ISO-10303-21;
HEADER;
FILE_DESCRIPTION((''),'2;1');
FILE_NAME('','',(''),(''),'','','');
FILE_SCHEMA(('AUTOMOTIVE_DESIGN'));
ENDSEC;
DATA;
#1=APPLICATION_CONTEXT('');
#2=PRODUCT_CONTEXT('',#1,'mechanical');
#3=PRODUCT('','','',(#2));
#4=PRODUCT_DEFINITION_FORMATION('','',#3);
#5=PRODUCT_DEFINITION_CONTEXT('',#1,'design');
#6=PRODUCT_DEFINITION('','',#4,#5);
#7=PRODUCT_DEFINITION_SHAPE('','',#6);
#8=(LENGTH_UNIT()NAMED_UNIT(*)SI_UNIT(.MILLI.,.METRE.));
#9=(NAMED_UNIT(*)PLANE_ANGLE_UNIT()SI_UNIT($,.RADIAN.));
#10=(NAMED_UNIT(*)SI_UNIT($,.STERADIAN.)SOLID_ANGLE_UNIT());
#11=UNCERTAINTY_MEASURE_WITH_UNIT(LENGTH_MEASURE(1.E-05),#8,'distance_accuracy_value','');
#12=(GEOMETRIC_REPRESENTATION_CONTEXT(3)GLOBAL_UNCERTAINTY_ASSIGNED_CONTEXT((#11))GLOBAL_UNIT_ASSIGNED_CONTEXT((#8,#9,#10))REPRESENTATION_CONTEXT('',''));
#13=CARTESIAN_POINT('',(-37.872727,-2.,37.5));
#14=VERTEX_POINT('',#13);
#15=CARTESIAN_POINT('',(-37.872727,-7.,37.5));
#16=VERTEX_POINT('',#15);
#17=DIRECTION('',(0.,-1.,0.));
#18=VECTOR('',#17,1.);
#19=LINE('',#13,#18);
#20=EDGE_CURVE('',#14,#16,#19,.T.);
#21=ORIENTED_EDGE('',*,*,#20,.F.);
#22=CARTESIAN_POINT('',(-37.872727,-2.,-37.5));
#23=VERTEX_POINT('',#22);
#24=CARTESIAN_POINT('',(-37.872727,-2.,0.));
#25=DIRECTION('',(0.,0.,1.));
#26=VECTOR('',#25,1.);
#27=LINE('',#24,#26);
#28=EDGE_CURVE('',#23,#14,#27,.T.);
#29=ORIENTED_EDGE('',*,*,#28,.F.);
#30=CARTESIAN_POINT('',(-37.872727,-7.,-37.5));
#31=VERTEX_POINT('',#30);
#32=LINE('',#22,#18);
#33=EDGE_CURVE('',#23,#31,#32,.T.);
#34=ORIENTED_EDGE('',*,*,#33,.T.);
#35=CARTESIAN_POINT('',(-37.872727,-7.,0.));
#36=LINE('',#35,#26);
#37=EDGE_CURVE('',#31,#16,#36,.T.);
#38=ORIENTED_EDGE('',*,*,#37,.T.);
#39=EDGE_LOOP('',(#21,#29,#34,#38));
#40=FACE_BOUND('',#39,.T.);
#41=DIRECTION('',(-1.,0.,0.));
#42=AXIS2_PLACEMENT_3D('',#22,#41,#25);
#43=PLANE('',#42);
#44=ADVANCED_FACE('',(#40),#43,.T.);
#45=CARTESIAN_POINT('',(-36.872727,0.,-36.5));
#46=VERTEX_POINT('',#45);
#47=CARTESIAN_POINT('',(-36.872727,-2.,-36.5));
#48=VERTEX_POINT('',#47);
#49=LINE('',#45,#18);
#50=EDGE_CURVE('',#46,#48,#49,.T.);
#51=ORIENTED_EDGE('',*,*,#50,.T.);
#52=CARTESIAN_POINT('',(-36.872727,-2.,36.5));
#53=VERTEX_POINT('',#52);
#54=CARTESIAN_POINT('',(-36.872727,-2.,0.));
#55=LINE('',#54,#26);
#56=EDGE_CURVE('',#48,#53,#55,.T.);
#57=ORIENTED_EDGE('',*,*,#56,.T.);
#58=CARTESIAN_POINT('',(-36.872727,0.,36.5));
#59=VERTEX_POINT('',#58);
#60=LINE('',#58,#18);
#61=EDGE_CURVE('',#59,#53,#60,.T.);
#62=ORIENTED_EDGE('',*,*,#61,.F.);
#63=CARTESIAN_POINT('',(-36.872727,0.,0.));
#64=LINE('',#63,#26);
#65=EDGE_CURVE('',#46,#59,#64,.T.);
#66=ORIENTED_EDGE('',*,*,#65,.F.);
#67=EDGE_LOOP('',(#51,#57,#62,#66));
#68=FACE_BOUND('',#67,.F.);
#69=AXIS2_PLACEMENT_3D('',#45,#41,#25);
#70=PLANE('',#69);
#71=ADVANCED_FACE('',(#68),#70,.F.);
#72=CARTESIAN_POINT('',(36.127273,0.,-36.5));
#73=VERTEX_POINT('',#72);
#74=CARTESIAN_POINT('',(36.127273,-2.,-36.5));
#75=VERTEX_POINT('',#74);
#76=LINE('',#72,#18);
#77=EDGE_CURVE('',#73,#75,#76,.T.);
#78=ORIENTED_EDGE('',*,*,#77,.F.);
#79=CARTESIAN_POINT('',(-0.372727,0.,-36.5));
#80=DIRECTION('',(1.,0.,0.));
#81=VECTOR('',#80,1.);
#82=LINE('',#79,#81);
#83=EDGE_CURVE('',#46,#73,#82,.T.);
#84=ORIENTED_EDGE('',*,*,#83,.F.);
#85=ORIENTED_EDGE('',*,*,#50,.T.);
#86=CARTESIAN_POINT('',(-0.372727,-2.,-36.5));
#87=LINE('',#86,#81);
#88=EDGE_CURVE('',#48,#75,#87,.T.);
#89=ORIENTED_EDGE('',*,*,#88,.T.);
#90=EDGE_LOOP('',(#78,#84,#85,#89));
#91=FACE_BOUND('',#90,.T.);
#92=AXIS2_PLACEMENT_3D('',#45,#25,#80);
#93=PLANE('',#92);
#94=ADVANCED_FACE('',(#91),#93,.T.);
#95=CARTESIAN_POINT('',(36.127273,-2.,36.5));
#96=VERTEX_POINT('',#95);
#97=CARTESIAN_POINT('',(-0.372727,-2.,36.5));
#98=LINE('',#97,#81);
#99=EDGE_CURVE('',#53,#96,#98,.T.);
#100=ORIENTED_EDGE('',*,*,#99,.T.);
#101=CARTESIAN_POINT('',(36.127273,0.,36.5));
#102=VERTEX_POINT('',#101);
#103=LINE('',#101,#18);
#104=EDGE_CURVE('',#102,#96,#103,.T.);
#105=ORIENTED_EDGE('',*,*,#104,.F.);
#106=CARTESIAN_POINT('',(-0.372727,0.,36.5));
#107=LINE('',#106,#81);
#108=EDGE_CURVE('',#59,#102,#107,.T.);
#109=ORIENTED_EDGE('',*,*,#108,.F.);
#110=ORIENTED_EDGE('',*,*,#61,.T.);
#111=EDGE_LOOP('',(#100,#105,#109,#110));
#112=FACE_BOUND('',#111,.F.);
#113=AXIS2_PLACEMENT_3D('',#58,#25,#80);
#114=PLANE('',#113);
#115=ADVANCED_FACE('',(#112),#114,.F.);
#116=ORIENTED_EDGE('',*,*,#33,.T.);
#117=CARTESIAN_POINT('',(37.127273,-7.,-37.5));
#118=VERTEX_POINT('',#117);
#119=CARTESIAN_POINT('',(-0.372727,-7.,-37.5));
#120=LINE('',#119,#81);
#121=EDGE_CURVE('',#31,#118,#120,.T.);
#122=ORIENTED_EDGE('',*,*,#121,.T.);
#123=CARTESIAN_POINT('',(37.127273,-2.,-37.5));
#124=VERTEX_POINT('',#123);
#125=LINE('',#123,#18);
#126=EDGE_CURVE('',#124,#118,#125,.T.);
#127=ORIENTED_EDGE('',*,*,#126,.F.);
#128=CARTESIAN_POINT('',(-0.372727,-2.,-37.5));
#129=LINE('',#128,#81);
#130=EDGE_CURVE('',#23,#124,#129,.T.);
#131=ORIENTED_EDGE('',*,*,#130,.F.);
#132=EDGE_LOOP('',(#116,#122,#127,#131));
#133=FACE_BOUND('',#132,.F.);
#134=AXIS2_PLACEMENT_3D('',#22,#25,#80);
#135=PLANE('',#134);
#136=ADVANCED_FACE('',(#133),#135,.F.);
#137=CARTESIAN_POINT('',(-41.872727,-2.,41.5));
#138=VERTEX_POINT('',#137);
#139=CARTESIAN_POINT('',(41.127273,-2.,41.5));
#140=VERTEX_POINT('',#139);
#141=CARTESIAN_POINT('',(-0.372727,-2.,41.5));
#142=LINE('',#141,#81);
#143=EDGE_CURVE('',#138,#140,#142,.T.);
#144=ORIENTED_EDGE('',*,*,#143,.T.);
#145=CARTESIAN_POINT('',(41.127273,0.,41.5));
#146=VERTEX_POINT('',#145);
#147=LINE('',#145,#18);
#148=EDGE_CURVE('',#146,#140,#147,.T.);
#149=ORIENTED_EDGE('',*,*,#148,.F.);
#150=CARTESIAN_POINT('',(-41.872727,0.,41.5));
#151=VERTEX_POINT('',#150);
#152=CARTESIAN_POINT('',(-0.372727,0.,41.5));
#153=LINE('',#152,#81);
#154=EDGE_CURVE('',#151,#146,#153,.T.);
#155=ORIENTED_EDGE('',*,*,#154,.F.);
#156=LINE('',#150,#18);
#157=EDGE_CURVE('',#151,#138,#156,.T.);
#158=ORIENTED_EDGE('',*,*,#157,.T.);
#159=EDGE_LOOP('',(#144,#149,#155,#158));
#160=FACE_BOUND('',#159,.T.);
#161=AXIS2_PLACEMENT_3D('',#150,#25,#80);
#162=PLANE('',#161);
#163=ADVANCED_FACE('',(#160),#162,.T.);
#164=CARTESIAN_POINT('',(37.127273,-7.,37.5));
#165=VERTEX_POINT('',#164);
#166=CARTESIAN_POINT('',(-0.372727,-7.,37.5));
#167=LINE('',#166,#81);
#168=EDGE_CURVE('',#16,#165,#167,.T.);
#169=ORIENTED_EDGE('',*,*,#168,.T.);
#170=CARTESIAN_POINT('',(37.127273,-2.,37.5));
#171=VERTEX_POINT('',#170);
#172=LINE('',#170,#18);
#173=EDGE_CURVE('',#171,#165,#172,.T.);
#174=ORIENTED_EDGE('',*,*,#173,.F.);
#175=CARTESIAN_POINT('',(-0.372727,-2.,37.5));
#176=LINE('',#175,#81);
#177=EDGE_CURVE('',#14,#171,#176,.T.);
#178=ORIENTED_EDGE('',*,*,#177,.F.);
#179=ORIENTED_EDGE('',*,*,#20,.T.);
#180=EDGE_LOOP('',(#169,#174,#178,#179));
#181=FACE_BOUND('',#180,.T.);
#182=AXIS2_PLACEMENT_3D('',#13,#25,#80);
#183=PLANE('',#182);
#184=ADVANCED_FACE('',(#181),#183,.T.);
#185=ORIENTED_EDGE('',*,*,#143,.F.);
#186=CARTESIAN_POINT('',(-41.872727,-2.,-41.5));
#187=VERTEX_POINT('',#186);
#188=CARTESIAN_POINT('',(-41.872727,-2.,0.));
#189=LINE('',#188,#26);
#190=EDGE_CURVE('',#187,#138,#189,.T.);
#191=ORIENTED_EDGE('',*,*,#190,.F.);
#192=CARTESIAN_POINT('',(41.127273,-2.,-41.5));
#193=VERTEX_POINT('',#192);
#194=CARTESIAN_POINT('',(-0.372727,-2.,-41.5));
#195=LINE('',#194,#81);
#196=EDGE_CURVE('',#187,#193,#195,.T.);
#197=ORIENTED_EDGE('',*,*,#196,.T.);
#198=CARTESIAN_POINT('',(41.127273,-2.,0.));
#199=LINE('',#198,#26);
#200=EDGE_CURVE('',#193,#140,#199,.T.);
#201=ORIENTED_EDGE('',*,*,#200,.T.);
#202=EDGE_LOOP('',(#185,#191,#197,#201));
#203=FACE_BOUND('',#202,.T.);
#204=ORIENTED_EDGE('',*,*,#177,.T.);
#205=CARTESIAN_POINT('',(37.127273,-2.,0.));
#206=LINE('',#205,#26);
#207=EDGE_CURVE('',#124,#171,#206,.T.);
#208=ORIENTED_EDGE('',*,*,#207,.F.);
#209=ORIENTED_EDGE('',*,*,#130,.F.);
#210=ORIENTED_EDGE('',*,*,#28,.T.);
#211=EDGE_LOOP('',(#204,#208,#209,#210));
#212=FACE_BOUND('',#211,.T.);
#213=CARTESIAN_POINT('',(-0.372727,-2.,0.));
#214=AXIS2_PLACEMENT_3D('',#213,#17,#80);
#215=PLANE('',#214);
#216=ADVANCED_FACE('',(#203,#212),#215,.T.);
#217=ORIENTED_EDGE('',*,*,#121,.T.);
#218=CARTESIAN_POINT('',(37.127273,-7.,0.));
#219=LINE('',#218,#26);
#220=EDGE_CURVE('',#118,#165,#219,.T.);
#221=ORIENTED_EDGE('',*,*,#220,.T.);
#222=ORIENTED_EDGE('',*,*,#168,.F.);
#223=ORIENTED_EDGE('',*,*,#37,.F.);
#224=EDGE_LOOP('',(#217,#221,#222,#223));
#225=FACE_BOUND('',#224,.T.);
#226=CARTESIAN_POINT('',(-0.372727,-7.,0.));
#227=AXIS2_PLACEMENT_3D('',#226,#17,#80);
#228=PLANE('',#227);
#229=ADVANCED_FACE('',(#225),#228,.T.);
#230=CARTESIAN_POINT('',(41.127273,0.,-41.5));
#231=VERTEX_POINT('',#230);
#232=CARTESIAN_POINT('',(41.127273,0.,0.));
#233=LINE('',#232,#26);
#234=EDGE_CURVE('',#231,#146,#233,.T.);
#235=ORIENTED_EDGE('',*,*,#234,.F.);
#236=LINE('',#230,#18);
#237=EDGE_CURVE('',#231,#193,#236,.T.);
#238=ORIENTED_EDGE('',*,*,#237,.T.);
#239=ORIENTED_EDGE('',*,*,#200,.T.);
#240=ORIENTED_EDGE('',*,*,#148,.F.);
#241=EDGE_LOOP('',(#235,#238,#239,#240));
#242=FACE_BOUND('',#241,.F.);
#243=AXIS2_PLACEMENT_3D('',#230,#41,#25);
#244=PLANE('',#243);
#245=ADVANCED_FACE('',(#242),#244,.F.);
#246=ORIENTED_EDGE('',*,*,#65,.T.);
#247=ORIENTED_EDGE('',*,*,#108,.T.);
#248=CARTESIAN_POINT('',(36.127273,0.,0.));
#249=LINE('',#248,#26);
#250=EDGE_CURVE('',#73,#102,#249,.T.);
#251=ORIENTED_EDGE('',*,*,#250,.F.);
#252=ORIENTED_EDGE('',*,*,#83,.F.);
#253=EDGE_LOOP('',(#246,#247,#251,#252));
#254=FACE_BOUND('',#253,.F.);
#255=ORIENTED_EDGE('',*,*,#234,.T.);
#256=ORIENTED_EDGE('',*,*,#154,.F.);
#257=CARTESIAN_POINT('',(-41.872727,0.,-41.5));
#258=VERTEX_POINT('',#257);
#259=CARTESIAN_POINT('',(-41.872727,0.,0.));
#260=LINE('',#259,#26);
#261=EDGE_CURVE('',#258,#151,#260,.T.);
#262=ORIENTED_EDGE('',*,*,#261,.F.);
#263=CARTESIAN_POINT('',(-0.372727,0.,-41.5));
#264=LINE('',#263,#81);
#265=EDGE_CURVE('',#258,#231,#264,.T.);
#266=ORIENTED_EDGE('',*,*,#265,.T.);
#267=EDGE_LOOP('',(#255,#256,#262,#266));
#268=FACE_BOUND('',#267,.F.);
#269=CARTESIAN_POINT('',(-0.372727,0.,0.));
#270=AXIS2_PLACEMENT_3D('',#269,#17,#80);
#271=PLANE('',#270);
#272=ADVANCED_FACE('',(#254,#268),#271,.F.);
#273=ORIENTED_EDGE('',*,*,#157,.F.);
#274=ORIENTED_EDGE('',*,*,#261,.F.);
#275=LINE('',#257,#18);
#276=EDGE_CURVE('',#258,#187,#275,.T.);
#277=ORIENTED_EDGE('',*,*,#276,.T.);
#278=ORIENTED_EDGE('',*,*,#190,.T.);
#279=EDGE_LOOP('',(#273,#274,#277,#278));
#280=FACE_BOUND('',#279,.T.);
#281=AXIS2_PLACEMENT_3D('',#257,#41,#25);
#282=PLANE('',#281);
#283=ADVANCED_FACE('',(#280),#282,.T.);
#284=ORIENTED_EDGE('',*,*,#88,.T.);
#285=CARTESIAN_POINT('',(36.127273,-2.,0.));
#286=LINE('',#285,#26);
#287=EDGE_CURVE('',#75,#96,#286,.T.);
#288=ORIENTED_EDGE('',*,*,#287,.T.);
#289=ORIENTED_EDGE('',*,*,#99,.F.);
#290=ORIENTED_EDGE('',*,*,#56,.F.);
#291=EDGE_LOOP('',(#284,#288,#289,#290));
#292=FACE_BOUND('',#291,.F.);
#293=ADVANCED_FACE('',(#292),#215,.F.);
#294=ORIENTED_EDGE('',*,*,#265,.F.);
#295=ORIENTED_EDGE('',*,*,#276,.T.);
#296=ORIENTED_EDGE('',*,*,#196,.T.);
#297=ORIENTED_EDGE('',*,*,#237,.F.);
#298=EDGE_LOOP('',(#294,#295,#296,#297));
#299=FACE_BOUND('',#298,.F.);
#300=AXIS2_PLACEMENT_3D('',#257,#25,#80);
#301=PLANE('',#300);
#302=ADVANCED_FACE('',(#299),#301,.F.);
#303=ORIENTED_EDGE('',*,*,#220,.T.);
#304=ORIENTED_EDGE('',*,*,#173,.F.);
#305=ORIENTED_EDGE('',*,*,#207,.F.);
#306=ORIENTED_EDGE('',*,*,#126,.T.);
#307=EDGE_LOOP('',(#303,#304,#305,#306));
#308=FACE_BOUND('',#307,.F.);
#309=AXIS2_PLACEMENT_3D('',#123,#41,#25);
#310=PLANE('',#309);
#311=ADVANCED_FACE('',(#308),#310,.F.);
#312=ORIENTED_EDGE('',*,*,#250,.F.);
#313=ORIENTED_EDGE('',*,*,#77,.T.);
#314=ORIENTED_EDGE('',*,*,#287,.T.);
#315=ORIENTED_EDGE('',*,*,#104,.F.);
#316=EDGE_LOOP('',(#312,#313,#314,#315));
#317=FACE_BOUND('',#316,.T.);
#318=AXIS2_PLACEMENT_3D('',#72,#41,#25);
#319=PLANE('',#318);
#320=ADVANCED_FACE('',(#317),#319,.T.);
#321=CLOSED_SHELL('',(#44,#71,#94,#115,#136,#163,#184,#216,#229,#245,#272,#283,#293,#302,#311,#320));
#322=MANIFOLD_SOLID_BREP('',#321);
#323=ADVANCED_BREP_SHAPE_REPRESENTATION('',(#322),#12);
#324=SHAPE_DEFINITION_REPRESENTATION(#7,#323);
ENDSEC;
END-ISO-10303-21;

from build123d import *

# Parameters (mm, degrees)
F1_W     = 83
F1_H     = 83
F1_W_2   = 73
F1_H_2   = 73
F2_DEPTH = 2
F3_W     = 75
F3_H     = 75
F4_DEPTH = 5


# Not quite as in the source:
# - a feature names something its author has since deleted; it is built from what else it names


with BuildPart() as f2:
    # F1 (on Front) → F2 (new body)
    with BuildSketch(Plane.XZ):
        with Locations((-0.3727272727, 0)):
            Rectangle(F1_W, F1_H)
        with Locations((-0.3727272727, 0)):
            Rectangle(F1_W_2, F1_H_2, mode=Mode.SUBTRACT)
    extrude(amount=F2_DEPTH)

    # F3 (on face) → F4 (join)
    with BuildSketch(Plane.XZ.offset(2)):
        with Locations((-0.3727272727, 0)):
            Rectangle(F3_W, F3_H)
    extrude(amount=F4_DEPTH)


solid = f2.part
